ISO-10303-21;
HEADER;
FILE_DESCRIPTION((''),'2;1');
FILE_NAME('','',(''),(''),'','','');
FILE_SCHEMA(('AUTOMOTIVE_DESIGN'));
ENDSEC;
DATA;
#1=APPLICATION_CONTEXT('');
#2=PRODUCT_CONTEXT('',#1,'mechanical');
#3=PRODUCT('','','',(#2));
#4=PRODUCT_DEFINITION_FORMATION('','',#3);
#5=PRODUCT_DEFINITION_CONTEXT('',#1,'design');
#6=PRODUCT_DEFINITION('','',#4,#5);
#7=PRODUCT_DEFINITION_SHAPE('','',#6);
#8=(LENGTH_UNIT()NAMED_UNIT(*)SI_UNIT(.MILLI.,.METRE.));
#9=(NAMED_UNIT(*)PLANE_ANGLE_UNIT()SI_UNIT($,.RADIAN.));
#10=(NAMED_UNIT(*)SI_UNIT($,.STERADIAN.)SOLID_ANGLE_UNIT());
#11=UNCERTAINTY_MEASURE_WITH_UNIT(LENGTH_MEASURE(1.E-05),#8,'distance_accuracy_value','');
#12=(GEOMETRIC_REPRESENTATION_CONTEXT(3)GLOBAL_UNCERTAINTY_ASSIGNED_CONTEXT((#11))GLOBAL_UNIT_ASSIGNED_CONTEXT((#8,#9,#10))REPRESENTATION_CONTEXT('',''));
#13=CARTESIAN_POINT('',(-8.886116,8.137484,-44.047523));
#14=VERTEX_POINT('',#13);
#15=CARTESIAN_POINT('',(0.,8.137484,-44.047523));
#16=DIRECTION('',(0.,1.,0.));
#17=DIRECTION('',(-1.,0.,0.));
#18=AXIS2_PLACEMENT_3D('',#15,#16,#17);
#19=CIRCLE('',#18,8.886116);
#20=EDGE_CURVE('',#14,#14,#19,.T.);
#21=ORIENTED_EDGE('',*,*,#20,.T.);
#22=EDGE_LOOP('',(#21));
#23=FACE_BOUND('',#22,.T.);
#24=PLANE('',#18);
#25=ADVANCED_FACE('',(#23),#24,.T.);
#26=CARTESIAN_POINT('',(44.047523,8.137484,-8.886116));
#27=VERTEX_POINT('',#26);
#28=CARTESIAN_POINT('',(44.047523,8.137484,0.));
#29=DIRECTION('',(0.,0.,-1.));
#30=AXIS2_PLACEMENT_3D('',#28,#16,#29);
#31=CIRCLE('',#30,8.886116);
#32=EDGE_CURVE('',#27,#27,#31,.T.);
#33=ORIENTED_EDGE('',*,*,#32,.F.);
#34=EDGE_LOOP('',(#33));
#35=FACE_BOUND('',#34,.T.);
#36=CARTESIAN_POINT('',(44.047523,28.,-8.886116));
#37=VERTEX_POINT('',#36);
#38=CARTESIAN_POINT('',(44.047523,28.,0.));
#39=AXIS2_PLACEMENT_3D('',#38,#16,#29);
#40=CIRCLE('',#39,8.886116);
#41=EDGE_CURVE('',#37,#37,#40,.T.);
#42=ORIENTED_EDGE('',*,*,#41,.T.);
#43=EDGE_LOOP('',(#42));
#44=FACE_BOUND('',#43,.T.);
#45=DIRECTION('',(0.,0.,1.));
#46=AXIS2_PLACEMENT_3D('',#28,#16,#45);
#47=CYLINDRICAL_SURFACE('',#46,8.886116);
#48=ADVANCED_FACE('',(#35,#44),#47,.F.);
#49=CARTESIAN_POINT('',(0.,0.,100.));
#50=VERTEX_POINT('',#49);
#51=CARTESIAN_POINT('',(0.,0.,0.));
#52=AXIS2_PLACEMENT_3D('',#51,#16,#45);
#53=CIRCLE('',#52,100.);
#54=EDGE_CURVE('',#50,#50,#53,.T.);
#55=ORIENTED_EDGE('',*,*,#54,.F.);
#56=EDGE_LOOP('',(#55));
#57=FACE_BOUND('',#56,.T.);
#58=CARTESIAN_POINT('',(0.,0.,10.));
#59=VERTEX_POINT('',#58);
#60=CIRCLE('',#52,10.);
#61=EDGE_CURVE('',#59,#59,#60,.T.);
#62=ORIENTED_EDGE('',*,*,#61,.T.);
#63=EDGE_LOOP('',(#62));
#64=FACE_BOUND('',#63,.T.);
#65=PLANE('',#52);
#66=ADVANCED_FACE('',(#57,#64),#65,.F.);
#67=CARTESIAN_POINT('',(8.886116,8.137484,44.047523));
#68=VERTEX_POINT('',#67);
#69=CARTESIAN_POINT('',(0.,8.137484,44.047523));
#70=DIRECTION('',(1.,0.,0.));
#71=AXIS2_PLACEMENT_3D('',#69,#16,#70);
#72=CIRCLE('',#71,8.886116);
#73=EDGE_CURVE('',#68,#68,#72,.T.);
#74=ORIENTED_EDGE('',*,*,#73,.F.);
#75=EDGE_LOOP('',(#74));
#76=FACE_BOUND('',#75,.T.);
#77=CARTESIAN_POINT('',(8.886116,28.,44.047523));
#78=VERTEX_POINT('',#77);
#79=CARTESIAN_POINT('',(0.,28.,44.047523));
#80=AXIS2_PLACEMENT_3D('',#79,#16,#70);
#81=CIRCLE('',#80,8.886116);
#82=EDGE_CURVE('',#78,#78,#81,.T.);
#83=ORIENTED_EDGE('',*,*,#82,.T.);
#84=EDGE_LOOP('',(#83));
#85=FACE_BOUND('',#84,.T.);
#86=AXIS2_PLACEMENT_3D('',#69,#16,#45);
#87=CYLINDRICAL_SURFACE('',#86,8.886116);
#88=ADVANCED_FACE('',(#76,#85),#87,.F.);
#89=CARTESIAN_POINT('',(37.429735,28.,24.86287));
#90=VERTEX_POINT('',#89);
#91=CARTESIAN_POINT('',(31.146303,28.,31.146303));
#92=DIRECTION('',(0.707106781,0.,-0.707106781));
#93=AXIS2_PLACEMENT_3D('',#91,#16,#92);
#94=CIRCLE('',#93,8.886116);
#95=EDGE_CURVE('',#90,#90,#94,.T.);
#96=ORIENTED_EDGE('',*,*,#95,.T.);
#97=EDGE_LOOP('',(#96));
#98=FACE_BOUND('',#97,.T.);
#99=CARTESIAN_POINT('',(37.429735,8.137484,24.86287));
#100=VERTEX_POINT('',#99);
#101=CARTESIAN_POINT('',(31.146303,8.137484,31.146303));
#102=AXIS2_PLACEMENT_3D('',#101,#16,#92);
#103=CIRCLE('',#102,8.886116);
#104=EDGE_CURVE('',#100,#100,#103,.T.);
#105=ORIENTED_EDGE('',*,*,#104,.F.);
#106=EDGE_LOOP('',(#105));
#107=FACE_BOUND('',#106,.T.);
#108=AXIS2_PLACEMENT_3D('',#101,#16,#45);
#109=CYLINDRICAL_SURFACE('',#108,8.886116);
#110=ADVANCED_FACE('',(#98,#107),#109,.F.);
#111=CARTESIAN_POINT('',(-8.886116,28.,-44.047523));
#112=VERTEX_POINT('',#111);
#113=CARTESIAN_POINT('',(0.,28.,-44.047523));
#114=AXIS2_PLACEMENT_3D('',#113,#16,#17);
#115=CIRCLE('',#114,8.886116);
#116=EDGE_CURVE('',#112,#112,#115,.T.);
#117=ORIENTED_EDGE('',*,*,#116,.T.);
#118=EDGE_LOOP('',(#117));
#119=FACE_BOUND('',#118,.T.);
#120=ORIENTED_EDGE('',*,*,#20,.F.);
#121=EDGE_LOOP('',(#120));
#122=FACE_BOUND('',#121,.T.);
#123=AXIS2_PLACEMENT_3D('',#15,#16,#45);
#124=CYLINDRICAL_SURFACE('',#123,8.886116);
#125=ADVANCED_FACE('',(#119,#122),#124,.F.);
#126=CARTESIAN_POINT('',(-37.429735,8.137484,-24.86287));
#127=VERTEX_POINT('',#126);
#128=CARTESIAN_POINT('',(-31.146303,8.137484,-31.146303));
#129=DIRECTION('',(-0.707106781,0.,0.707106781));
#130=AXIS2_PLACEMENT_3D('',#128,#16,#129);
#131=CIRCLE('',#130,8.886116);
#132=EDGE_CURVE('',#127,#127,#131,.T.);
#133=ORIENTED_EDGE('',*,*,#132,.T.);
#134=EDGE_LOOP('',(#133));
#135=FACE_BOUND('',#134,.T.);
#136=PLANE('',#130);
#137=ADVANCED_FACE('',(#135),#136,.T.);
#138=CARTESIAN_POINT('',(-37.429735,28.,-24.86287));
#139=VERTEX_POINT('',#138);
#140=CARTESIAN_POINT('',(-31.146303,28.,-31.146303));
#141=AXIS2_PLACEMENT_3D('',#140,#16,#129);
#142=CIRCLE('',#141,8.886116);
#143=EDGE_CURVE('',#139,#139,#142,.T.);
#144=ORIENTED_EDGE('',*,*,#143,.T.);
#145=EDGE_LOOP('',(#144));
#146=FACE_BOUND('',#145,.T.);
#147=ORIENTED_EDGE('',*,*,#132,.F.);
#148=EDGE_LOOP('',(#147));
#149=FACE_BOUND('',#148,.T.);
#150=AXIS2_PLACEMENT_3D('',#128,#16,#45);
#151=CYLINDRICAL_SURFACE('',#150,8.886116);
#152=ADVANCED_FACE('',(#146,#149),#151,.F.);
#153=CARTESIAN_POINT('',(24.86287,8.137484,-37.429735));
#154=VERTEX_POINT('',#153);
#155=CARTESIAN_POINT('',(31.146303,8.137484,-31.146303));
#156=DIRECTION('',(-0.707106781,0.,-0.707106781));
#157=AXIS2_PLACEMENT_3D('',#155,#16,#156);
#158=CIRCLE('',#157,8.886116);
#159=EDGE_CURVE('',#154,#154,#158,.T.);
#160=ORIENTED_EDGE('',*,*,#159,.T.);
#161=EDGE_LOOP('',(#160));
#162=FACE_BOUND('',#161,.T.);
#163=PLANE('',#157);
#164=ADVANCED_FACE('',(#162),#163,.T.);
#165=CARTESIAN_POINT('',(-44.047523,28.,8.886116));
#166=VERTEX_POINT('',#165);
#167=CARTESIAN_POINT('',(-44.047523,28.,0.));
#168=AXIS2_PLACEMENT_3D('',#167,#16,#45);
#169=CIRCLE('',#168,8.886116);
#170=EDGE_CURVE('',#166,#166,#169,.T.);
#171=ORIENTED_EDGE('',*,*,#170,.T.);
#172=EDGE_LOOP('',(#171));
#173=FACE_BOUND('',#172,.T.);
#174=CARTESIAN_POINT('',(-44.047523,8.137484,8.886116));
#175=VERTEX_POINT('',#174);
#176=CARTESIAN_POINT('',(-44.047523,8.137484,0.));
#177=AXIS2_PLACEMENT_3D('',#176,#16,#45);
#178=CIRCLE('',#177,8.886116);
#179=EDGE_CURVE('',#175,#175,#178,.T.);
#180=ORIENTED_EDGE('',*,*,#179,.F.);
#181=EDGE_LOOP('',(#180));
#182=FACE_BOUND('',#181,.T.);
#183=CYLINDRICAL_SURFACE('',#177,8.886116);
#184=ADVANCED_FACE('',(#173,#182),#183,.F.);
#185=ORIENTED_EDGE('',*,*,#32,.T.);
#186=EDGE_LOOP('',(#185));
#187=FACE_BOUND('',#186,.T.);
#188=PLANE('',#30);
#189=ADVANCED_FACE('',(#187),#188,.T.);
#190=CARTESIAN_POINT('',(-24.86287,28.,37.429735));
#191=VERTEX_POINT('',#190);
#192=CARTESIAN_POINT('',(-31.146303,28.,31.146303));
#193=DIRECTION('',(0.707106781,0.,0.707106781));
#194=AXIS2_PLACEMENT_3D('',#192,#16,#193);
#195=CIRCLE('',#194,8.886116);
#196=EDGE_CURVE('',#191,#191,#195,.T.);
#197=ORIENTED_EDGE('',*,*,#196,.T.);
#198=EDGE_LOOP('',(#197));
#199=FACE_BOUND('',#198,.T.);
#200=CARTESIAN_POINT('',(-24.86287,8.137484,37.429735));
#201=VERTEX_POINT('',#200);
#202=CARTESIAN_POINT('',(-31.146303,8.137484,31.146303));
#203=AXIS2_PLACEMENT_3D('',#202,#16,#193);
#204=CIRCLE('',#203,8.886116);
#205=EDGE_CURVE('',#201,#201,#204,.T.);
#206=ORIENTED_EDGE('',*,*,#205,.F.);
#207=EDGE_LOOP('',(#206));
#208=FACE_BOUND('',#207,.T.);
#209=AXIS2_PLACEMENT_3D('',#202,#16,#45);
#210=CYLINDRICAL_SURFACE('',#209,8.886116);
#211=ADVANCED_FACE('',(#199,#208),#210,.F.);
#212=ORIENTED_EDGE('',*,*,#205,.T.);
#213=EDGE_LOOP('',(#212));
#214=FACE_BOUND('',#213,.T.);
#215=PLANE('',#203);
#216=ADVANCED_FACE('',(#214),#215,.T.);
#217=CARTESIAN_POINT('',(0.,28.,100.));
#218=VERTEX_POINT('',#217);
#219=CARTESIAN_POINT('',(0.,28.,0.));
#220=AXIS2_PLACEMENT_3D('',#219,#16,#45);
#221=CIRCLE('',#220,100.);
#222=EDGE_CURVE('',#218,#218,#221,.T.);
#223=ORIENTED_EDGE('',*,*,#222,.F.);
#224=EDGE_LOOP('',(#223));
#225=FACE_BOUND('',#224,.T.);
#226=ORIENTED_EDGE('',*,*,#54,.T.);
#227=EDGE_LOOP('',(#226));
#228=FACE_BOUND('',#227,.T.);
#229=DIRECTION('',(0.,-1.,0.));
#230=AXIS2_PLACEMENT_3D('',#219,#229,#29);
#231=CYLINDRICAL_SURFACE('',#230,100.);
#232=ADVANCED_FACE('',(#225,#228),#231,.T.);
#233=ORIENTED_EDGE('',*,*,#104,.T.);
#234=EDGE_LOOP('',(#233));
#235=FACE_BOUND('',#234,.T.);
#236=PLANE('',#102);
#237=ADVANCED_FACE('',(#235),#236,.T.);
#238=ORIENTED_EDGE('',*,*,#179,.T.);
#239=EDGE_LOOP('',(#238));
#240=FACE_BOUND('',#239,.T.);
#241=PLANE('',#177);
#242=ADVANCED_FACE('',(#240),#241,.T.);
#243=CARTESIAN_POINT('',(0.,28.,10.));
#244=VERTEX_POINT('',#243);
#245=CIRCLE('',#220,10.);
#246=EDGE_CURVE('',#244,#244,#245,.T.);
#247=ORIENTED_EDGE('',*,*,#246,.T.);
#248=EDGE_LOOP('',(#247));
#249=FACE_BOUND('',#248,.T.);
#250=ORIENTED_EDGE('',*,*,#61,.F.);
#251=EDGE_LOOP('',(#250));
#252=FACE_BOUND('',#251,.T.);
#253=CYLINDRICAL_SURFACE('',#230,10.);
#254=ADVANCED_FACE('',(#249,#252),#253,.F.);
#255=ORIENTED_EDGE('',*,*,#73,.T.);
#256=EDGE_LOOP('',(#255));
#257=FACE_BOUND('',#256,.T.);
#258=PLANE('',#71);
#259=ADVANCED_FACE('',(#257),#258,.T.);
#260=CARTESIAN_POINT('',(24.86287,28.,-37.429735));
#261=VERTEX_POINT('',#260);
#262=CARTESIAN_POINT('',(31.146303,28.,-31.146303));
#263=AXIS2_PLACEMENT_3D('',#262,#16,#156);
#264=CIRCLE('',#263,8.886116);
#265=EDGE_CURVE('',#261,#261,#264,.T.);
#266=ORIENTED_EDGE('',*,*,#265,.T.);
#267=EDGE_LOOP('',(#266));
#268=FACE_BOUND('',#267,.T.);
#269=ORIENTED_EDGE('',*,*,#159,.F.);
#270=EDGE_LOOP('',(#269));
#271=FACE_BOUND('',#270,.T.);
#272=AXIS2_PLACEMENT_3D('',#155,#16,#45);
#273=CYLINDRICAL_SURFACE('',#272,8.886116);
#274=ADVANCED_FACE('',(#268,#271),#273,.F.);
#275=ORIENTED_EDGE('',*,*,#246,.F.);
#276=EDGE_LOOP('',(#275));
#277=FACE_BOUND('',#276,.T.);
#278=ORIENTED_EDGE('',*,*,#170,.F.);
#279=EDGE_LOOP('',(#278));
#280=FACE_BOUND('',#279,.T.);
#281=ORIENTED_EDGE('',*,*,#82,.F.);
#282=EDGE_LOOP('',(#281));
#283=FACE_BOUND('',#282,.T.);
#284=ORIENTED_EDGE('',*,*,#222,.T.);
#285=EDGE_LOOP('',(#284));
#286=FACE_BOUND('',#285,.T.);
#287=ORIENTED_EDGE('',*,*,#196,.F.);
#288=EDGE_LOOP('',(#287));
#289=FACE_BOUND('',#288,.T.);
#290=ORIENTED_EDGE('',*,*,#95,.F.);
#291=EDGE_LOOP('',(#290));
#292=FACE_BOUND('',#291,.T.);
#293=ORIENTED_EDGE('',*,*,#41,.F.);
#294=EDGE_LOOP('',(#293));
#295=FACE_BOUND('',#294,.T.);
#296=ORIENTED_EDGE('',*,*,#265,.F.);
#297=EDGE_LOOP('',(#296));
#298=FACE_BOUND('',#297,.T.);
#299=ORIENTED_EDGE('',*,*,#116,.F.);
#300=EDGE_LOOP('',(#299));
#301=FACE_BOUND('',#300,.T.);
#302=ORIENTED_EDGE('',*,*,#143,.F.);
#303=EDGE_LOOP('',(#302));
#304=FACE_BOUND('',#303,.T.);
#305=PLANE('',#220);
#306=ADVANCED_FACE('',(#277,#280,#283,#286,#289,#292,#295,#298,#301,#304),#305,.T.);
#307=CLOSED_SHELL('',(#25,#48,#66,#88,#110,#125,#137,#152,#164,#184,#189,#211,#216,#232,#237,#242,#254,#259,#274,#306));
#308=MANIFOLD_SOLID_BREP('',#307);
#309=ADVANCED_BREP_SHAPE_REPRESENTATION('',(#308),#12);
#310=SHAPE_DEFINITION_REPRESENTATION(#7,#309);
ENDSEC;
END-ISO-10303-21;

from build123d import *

# Parameters (mm, degrees)
SKETCH1_R           = 100
BOSS_EXTRUDE1_DEPTH = 28
SKETCH2_R           = 10
CUT_EXTRUDE1_DEPTH  = 145.166570328
SKETCH3_R           = 8.88611574
CUT_EXTRUDE2_DEPTH  = 19.862515875
CIRPATTERN1_COUNT   = 8


with BuildPart() as part:
    # Sketch1 → Boss-Extrude1 (new body)
    with BuildSketch(Plane(origin=(0, 0, 0), x_dir=(1, 0, 0), z_dir=(0, 1, 0))):
        Circle(SKETCH1_R)
    extrude(amount=BOSS_EXTRUDE1_DEPTH)

    # Sketch2 → Cut-Extrude1 (cut, through all)
    with BuildSketch(Plane(origin=(0, 0, 0), x_dir=(1, 0, 0), z_dir=(0, 1, 0))):
        Circle(SKETCH2_R)
    extrude(amount=CUT_EXTRUDE1_DEPTH, mode=Mode.SUBTRACT)

    # Sketch3 → Cut-Extrude2 (cut)
    with BuildSketch(Plane(origin=(0, 28, 0), x_dir=(1, 0, 0), z_dir=(0, 1, 0))):
        with Locations((-44.047523464, 0)):
            Circle(SKETCH3_R)
    cut_extrude2 = extrude(amount=-CUT_EXTRUDE2_DEPTH, mode=Mode.SUBTRACT)

    # CirPattern1: Cut-Extrude2 ×8 about axis
    cirpattern1_axis = Axis((0, 0, 0), (0, 1, 0))
    for i in range(1, CIRPATTERN1_COUNT):
        add(cut_extrude2.rotate(cirpattern1_axis, i * 360 / CIRPATTERN1_COUNT), mode=Mode.SUBTRACT)


solid = part.part
